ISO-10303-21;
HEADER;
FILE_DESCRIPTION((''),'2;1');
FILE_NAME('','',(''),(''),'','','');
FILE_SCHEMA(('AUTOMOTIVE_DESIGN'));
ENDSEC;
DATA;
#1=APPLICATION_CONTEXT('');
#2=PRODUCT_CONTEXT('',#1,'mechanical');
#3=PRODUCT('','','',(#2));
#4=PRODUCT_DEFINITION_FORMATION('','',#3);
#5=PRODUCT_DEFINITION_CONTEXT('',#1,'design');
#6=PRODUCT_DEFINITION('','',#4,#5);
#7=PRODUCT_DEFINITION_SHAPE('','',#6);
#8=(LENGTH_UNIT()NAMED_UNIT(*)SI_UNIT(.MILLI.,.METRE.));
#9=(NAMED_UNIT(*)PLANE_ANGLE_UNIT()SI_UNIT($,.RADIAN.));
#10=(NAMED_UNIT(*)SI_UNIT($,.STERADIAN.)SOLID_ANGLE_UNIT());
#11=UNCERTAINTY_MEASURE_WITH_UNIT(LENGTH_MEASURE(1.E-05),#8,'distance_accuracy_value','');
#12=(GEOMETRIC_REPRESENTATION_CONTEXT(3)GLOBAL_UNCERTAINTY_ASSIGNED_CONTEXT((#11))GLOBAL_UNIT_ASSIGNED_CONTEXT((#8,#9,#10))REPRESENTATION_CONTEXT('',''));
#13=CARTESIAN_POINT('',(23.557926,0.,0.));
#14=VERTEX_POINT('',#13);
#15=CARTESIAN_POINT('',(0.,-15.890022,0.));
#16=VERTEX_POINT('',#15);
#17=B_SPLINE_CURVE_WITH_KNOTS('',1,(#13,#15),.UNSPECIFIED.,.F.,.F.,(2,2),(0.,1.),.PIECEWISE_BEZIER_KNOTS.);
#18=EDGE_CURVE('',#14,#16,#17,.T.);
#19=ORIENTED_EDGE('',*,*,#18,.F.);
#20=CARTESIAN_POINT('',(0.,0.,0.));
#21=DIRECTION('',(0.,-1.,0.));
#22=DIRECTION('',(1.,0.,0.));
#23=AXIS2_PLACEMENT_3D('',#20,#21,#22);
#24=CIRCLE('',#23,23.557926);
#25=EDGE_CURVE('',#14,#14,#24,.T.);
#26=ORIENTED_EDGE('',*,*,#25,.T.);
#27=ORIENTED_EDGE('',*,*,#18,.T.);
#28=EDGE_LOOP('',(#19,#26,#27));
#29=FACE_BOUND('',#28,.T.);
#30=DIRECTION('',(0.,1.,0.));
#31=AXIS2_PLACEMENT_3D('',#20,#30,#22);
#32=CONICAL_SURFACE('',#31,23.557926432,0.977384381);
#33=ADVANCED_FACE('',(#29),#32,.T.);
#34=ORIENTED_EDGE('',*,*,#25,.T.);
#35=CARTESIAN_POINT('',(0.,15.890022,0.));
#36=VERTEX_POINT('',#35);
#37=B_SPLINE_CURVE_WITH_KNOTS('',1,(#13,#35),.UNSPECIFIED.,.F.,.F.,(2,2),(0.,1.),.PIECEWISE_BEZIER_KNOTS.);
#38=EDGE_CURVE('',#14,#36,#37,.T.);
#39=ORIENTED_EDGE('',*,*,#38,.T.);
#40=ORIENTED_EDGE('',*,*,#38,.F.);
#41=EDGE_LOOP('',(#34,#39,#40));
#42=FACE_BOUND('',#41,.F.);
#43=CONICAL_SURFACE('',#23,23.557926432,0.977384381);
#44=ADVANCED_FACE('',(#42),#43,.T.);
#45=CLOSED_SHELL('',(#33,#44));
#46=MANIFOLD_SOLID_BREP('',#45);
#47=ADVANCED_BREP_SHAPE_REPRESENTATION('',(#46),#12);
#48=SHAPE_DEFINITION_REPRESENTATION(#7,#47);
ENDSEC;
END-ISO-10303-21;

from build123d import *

# Parameters (mm, degrees)
F0_R = 23.5579264322


# Not quite as in the source:
# - an extrude whose draft closes it to a point is written as a loft to that point


with BuildPart() as f1:
    # F0 (on Front) → F1 section 0
    with BuildSketch(Plane.XZ, mode=Mode.PRIVATE) as f1_s0:
        Circle(F0_R)
    loft([f1_s0.sketch, Vertex(0, -15.8900220177, 0)], ruled=True)

    # F2: F1 across plane


with BuildPart() as f1_1:
    add(f1.part)
    add(f1.part.mirror(Plane.XZ))


solid = f1_1.part
